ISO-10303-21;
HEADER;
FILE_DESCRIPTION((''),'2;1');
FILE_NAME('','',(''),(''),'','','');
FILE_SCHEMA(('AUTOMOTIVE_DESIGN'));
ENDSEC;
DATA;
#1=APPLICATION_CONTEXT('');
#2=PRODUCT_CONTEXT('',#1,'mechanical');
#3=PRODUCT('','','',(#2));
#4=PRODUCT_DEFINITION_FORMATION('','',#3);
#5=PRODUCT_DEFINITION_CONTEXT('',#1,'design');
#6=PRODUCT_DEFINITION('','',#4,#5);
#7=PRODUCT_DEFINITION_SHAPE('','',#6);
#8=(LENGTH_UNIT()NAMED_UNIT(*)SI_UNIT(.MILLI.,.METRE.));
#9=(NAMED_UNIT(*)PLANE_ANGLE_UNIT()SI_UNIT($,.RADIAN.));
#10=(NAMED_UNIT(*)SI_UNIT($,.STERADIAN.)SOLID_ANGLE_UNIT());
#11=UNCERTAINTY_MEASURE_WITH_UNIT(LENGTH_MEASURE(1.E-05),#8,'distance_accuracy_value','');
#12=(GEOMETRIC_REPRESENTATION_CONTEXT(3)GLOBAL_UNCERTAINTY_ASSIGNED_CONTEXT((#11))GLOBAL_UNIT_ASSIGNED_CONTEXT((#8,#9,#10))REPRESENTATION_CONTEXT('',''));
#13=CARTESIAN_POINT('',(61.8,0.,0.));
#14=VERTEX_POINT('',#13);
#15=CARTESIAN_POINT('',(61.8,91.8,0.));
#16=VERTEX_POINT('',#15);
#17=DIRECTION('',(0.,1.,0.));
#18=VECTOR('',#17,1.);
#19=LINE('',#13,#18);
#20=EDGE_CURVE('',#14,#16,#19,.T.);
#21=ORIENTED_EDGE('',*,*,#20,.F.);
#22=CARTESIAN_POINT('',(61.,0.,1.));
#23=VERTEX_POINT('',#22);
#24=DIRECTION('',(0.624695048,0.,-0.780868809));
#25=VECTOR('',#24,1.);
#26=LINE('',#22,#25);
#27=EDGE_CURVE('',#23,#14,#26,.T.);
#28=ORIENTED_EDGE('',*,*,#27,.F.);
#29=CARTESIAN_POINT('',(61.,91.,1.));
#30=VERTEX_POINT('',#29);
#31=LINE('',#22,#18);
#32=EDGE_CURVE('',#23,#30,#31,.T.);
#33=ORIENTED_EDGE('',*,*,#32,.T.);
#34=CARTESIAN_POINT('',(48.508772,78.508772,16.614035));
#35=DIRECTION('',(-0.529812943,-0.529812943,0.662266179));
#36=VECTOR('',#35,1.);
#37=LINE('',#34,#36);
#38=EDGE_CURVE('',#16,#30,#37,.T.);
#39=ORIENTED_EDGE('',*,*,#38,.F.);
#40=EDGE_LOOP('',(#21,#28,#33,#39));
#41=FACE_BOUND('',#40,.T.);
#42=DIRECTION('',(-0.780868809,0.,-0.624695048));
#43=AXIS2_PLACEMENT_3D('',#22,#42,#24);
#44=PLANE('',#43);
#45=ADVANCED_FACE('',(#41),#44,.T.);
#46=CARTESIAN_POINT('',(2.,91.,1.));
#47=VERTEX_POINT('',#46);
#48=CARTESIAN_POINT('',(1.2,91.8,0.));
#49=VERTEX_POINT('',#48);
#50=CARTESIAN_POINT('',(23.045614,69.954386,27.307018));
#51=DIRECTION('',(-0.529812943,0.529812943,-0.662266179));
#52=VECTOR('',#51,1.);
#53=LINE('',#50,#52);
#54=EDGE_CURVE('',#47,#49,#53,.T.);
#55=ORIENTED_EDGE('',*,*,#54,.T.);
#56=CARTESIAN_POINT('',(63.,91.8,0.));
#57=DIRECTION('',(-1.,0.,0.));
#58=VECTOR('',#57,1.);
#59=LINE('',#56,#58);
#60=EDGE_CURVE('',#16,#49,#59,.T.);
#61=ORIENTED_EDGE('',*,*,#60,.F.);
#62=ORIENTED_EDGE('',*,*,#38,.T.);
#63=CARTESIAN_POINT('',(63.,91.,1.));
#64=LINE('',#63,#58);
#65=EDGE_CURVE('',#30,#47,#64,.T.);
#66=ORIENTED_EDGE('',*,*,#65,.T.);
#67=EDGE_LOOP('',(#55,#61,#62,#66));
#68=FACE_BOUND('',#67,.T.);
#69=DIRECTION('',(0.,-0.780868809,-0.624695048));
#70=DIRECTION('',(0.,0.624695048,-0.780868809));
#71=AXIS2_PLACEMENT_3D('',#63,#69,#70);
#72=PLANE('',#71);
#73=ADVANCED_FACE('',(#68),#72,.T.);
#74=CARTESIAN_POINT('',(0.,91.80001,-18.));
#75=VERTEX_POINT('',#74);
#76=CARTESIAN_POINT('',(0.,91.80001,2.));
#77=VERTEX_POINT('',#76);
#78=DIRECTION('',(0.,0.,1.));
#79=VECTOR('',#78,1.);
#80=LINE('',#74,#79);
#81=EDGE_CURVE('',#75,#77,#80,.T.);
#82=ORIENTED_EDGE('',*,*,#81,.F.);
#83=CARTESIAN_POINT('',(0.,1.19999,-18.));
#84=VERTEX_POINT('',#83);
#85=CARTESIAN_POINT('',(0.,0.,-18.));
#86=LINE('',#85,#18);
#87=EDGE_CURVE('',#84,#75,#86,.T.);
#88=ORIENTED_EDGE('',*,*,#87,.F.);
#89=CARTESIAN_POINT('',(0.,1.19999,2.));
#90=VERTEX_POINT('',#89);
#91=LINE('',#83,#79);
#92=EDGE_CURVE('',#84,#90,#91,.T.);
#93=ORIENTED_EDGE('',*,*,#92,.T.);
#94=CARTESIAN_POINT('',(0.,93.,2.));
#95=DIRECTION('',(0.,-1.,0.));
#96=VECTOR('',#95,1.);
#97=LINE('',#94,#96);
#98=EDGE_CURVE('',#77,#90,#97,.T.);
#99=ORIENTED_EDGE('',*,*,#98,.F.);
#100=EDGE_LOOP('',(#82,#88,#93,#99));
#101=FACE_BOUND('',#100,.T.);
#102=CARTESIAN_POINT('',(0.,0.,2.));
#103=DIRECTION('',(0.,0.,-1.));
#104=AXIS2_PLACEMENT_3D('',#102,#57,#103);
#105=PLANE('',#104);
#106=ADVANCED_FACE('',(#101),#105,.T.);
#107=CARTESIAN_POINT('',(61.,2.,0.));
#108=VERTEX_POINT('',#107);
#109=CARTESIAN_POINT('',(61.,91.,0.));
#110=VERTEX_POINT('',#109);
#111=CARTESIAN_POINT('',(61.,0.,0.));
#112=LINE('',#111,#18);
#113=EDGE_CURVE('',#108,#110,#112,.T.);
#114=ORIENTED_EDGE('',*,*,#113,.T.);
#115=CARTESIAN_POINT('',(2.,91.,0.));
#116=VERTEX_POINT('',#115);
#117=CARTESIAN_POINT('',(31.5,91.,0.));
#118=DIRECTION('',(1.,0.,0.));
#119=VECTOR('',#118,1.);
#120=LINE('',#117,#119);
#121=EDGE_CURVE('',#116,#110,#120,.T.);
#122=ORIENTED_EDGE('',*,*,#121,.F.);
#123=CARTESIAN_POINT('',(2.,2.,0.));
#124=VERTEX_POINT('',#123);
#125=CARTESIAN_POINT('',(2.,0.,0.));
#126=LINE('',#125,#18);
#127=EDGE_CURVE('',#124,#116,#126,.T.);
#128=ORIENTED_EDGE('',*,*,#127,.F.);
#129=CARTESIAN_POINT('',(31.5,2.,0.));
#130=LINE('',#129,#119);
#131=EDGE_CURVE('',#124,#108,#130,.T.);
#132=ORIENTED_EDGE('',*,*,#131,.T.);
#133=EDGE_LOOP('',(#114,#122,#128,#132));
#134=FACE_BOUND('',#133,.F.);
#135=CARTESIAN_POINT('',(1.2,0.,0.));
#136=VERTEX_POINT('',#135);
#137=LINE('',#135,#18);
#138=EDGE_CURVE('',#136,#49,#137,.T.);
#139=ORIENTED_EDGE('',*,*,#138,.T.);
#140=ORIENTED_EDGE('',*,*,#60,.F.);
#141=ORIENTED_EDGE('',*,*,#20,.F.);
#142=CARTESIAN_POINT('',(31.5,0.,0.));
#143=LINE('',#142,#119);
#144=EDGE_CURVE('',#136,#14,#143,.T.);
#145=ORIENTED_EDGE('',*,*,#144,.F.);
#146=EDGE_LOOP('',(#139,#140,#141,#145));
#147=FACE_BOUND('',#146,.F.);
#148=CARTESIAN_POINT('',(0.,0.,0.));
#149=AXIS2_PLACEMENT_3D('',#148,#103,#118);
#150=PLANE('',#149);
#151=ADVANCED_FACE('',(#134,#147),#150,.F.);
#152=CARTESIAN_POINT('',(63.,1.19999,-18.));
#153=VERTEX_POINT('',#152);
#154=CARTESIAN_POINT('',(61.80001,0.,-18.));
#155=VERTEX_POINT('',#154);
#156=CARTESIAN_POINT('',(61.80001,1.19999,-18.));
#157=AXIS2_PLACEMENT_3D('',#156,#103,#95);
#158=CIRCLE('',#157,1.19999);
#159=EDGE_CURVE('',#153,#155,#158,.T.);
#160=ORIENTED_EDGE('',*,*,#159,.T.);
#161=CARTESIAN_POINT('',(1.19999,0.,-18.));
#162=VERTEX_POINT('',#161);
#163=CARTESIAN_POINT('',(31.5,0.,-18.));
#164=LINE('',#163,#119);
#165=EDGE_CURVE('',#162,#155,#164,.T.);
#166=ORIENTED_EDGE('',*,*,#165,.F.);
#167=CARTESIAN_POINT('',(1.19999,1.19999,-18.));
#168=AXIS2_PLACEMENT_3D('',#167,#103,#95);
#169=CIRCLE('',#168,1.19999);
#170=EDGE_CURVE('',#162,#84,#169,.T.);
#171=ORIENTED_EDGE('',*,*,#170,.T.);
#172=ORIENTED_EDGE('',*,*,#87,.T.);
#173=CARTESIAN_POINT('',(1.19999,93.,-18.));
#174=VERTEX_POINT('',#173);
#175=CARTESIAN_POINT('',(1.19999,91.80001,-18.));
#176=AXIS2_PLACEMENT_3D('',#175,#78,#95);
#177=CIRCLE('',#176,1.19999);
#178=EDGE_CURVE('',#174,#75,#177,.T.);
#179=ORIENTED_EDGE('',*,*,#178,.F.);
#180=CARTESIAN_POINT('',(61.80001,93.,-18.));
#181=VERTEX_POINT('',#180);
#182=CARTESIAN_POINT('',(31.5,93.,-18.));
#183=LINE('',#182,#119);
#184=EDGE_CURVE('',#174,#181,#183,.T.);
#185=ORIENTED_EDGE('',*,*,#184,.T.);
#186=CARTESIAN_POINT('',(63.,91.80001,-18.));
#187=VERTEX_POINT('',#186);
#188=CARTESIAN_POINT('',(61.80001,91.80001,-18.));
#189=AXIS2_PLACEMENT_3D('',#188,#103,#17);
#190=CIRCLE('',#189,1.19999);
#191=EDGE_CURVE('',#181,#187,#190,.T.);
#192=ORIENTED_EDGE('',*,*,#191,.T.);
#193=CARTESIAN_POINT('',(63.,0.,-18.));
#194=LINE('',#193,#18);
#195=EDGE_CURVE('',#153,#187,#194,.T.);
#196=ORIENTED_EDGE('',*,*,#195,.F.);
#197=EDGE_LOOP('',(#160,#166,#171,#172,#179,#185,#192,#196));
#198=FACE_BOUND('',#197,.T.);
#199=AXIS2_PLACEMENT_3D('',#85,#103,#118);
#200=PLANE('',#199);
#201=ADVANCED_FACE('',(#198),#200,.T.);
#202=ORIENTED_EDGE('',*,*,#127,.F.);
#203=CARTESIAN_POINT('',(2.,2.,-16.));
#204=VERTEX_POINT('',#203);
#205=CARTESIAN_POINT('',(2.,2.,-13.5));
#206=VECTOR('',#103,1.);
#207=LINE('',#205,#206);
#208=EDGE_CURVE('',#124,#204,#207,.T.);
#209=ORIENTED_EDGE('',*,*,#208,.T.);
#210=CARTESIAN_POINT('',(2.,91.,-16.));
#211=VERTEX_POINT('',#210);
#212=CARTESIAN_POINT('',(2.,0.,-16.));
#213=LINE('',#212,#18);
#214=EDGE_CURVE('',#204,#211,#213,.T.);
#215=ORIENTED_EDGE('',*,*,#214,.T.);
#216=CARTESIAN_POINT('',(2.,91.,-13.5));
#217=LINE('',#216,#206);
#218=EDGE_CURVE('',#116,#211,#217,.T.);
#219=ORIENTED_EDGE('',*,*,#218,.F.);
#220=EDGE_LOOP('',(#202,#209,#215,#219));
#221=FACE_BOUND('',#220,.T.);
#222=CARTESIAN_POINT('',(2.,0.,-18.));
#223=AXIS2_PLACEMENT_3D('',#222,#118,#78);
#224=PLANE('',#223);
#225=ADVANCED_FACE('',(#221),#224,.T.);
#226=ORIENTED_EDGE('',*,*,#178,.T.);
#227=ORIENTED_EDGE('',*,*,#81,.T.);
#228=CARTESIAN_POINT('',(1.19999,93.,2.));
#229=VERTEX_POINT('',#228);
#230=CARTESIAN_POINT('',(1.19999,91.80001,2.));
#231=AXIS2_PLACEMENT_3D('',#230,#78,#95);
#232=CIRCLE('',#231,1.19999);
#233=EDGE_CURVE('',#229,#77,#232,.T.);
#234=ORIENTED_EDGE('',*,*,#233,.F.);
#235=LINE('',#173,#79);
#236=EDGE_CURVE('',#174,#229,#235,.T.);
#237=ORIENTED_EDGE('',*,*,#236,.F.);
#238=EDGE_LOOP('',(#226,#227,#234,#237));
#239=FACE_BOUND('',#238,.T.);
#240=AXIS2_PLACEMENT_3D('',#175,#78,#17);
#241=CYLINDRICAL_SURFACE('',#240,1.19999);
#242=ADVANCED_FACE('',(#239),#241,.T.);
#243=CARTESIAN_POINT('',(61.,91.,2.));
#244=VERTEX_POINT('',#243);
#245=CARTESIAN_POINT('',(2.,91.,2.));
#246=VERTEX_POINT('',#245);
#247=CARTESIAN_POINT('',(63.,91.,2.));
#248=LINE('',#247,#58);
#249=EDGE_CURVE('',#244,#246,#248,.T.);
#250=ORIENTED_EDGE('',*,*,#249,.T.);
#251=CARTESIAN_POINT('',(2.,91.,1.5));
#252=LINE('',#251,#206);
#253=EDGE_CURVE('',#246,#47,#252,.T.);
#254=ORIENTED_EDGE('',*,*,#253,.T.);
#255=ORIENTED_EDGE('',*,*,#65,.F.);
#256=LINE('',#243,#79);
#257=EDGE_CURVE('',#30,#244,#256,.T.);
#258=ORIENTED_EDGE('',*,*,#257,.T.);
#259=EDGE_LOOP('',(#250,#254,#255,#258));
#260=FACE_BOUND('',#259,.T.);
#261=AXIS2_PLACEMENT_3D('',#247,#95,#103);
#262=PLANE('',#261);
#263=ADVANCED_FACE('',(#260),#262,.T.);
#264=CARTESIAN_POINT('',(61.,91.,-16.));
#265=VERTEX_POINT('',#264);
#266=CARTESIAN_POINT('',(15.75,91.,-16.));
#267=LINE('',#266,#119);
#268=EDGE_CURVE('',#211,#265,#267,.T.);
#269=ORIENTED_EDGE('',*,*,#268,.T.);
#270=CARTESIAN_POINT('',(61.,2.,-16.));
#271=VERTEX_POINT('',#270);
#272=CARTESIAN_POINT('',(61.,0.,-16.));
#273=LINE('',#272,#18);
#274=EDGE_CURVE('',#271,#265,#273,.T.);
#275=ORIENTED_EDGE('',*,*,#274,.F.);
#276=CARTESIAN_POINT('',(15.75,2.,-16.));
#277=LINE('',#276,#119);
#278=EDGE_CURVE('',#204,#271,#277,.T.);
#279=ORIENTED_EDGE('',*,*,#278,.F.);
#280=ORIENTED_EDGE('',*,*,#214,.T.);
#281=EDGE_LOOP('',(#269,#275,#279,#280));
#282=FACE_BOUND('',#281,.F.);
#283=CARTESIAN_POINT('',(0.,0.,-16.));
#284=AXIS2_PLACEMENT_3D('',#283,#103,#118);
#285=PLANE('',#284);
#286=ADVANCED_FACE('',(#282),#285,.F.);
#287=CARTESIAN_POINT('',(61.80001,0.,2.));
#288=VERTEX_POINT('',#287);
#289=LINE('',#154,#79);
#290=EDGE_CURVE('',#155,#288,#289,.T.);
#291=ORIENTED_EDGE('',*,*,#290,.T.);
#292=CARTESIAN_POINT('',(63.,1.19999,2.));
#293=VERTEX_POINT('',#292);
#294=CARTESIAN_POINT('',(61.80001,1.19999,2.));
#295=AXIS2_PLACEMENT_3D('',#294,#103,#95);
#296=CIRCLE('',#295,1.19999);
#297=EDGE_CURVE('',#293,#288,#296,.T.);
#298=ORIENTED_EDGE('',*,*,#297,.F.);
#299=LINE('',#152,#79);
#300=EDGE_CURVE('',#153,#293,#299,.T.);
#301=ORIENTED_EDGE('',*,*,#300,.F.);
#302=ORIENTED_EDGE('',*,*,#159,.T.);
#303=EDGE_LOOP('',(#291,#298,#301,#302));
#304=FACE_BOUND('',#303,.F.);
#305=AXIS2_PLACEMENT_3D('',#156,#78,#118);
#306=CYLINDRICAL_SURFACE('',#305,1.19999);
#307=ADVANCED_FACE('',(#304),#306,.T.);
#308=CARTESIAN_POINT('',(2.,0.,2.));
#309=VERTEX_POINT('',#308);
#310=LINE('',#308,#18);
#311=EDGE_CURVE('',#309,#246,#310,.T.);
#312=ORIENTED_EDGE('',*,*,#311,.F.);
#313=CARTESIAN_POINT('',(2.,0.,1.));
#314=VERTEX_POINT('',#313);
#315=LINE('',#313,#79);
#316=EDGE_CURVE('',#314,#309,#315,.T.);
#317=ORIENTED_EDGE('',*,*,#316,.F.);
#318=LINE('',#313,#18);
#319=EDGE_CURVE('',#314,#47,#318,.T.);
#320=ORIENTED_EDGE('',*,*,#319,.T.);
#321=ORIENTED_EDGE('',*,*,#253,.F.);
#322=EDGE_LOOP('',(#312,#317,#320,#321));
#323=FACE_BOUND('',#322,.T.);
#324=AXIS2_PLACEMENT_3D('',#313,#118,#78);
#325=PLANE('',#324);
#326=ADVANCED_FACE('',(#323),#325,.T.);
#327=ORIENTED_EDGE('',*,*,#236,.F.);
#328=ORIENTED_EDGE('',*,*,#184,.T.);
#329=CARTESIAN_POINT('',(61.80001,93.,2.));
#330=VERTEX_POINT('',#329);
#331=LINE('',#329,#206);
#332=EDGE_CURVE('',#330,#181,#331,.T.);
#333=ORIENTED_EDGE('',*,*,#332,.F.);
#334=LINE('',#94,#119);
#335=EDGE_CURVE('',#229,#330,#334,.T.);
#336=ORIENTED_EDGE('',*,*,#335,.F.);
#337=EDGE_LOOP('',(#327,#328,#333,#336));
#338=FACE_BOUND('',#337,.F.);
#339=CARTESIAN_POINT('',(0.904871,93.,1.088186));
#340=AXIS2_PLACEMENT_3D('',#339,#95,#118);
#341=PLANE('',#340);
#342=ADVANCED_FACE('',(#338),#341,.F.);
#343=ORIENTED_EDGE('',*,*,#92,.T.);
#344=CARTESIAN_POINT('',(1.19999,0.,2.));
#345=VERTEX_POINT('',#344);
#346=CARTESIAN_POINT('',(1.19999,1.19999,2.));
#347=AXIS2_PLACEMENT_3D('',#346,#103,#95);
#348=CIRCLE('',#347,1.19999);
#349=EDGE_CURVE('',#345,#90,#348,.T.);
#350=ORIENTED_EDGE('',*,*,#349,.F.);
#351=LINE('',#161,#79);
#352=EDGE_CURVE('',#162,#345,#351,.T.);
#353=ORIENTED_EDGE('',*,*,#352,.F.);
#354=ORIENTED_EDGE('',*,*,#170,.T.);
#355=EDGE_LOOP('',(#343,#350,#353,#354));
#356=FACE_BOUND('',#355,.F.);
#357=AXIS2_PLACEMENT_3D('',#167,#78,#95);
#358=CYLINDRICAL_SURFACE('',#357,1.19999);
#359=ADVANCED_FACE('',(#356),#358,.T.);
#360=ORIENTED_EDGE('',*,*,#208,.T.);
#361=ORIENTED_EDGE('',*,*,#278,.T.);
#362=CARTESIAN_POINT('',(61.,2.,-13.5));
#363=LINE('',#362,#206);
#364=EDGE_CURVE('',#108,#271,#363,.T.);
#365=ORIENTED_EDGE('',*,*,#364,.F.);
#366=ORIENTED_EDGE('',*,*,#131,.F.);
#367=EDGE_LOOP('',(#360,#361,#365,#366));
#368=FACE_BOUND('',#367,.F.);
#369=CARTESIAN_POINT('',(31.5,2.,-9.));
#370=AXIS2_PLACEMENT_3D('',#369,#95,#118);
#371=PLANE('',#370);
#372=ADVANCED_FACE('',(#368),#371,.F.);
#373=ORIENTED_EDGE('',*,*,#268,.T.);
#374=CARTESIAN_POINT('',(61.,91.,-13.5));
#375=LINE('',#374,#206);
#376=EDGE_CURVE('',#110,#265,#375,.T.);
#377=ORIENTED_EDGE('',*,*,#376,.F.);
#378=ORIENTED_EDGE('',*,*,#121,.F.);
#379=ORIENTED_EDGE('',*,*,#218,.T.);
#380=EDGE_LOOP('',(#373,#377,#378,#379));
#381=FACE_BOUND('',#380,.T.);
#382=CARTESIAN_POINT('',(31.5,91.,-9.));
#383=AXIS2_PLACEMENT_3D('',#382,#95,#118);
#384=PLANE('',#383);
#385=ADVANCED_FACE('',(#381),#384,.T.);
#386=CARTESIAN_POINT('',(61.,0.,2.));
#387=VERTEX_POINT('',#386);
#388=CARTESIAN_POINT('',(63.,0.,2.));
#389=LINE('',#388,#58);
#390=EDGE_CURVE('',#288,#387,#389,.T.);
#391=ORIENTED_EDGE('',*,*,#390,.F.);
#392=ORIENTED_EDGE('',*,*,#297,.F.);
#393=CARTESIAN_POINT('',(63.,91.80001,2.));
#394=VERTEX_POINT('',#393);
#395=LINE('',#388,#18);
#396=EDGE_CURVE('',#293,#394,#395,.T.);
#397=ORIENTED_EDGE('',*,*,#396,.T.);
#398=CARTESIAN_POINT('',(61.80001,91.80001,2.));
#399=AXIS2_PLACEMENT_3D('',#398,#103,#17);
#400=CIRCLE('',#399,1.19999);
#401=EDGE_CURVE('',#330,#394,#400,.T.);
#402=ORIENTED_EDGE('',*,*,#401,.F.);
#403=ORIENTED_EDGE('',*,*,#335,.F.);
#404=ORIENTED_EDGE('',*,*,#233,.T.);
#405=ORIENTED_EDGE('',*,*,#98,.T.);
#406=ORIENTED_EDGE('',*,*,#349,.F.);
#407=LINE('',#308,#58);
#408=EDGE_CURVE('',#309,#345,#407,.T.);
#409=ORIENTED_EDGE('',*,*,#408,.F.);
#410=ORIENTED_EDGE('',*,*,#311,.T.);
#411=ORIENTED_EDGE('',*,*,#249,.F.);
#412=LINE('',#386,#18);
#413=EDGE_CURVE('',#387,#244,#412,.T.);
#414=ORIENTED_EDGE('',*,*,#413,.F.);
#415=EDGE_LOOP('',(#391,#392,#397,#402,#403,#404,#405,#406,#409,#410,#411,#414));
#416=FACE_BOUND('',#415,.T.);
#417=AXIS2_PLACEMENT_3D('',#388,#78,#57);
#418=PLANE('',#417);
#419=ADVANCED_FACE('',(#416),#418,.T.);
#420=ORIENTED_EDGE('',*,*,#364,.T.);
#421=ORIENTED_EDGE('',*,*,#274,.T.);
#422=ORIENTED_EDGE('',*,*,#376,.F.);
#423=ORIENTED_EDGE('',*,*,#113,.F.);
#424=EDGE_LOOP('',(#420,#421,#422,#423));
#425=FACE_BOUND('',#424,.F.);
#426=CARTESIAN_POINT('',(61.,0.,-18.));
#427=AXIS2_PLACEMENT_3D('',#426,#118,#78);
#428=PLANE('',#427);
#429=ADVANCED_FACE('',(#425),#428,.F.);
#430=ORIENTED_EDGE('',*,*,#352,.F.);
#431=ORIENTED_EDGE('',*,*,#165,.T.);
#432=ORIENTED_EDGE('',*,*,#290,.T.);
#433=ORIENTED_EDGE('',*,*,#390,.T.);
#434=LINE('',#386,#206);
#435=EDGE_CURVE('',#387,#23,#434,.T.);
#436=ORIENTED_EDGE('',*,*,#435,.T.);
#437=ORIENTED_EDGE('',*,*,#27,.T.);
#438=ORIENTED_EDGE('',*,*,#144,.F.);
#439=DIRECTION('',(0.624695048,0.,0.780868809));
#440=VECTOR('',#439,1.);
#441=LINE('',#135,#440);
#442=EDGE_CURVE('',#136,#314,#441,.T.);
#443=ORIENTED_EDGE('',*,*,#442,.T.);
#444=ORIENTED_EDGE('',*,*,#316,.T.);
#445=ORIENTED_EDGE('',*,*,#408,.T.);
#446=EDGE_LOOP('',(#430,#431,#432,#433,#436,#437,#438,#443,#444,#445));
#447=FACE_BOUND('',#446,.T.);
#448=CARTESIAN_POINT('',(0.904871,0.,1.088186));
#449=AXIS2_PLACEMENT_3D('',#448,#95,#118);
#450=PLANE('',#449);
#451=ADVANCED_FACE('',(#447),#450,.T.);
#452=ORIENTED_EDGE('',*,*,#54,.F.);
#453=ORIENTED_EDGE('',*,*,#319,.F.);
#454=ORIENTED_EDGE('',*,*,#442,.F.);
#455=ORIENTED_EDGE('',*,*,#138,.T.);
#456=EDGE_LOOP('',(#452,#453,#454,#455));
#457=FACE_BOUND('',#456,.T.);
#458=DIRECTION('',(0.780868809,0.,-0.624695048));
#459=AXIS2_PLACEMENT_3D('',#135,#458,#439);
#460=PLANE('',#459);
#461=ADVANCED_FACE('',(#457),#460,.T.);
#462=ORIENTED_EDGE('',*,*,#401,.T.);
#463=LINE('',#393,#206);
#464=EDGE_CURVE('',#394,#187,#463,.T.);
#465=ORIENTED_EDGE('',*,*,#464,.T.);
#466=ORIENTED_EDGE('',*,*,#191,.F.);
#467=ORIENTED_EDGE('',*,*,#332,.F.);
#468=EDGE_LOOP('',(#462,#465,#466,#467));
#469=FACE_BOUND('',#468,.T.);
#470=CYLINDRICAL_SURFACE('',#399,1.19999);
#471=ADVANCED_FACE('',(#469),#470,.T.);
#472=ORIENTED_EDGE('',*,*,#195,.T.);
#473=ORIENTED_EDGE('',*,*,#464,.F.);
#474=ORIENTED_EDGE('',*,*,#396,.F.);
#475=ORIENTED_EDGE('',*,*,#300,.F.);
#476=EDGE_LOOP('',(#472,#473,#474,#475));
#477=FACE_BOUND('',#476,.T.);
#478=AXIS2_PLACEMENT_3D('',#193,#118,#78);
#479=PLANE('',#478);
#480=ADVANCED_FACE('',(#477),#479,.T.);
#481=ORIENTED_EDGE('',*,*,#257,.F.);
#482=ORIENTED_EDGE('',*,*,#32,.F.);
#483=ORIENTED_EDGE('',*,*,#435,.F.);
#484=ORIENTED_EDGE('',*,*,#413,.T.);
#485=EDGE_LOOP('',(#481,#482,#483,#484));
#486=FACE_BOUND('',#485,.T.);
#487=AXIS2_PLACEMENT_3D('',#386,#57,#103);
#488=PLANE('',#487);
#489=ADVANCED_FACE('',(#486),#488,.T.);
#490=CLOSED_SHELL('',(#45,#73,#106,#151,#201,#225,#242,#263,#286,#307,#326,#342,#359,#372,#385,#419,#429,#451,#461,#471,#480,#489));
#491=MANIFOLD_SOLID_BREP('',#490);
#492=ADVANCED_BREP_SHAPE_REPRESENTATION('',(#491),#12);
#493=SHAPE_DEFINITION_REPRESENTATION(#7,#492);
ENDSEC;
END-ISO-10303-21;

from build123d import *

# Parameters (mm, degrees)
F0_W     = 63
F0_H     = 18
F1_DEPTH = 93
F2_T     = -2
F4_DEPTH = 93
F6_DEPTH = 63
F7_R     = 1.19999


# Not quite as in the source:
# - a fillet or chamfer is up to 0.001 mm smaller than in the source, because OpenCascade refuses the exact size


with BuildPart() as f1:
    # F0 (on Front) → F1 (new body)
    with BuildSketch(Plane.XZ):
        with Locations((31.5, -9)):
            Rectangle(F0_W, F0_H)
    extrude(amount=-F1_DEPTH)

    # F2
    f2_openings = [f1.faces().sort_by_distance(p)[0] for p in [
        (31.5, 46.5, 0),
    ]]
    offset(amount=F2_T, openings=f2_openings)

    # F3 (on face) → F4 (join, through all)
    with BuildSketch(Plane.XZ):
        Polygon((0, 2), (0, 0), (1.2, 0), (2, 1), (2, 2), align=None)
        Polygon((61, 1), (61.8, 0), (63, 0), (63, 2), (61, 2), align=None)
    extrude(amount=-F4_DEPTH)

    # F5 (on face) → F6 (join, through all)
    with BuildSketch(Plane.YZ.offset(63)):
        Polygon((93, 0), (93, 2), (91, 2), (91, 1), (91.8, 0), align=None)
    extrude(amount=-F6_DEPTH)

    # F7 (radius 1.2 in the source; OpenCascade refuses exactly that, so slightly less here)
    f7_edges = [f1.edges().sort_by_distance(p)[0] for p in [
        (63, 0, -8),
        (63, 93, -8),
        (0, 0, -8),
        (0, 93, -8),
    ]]
    fillet(f7_edges, radius=F7_R)


solid = f1.part
